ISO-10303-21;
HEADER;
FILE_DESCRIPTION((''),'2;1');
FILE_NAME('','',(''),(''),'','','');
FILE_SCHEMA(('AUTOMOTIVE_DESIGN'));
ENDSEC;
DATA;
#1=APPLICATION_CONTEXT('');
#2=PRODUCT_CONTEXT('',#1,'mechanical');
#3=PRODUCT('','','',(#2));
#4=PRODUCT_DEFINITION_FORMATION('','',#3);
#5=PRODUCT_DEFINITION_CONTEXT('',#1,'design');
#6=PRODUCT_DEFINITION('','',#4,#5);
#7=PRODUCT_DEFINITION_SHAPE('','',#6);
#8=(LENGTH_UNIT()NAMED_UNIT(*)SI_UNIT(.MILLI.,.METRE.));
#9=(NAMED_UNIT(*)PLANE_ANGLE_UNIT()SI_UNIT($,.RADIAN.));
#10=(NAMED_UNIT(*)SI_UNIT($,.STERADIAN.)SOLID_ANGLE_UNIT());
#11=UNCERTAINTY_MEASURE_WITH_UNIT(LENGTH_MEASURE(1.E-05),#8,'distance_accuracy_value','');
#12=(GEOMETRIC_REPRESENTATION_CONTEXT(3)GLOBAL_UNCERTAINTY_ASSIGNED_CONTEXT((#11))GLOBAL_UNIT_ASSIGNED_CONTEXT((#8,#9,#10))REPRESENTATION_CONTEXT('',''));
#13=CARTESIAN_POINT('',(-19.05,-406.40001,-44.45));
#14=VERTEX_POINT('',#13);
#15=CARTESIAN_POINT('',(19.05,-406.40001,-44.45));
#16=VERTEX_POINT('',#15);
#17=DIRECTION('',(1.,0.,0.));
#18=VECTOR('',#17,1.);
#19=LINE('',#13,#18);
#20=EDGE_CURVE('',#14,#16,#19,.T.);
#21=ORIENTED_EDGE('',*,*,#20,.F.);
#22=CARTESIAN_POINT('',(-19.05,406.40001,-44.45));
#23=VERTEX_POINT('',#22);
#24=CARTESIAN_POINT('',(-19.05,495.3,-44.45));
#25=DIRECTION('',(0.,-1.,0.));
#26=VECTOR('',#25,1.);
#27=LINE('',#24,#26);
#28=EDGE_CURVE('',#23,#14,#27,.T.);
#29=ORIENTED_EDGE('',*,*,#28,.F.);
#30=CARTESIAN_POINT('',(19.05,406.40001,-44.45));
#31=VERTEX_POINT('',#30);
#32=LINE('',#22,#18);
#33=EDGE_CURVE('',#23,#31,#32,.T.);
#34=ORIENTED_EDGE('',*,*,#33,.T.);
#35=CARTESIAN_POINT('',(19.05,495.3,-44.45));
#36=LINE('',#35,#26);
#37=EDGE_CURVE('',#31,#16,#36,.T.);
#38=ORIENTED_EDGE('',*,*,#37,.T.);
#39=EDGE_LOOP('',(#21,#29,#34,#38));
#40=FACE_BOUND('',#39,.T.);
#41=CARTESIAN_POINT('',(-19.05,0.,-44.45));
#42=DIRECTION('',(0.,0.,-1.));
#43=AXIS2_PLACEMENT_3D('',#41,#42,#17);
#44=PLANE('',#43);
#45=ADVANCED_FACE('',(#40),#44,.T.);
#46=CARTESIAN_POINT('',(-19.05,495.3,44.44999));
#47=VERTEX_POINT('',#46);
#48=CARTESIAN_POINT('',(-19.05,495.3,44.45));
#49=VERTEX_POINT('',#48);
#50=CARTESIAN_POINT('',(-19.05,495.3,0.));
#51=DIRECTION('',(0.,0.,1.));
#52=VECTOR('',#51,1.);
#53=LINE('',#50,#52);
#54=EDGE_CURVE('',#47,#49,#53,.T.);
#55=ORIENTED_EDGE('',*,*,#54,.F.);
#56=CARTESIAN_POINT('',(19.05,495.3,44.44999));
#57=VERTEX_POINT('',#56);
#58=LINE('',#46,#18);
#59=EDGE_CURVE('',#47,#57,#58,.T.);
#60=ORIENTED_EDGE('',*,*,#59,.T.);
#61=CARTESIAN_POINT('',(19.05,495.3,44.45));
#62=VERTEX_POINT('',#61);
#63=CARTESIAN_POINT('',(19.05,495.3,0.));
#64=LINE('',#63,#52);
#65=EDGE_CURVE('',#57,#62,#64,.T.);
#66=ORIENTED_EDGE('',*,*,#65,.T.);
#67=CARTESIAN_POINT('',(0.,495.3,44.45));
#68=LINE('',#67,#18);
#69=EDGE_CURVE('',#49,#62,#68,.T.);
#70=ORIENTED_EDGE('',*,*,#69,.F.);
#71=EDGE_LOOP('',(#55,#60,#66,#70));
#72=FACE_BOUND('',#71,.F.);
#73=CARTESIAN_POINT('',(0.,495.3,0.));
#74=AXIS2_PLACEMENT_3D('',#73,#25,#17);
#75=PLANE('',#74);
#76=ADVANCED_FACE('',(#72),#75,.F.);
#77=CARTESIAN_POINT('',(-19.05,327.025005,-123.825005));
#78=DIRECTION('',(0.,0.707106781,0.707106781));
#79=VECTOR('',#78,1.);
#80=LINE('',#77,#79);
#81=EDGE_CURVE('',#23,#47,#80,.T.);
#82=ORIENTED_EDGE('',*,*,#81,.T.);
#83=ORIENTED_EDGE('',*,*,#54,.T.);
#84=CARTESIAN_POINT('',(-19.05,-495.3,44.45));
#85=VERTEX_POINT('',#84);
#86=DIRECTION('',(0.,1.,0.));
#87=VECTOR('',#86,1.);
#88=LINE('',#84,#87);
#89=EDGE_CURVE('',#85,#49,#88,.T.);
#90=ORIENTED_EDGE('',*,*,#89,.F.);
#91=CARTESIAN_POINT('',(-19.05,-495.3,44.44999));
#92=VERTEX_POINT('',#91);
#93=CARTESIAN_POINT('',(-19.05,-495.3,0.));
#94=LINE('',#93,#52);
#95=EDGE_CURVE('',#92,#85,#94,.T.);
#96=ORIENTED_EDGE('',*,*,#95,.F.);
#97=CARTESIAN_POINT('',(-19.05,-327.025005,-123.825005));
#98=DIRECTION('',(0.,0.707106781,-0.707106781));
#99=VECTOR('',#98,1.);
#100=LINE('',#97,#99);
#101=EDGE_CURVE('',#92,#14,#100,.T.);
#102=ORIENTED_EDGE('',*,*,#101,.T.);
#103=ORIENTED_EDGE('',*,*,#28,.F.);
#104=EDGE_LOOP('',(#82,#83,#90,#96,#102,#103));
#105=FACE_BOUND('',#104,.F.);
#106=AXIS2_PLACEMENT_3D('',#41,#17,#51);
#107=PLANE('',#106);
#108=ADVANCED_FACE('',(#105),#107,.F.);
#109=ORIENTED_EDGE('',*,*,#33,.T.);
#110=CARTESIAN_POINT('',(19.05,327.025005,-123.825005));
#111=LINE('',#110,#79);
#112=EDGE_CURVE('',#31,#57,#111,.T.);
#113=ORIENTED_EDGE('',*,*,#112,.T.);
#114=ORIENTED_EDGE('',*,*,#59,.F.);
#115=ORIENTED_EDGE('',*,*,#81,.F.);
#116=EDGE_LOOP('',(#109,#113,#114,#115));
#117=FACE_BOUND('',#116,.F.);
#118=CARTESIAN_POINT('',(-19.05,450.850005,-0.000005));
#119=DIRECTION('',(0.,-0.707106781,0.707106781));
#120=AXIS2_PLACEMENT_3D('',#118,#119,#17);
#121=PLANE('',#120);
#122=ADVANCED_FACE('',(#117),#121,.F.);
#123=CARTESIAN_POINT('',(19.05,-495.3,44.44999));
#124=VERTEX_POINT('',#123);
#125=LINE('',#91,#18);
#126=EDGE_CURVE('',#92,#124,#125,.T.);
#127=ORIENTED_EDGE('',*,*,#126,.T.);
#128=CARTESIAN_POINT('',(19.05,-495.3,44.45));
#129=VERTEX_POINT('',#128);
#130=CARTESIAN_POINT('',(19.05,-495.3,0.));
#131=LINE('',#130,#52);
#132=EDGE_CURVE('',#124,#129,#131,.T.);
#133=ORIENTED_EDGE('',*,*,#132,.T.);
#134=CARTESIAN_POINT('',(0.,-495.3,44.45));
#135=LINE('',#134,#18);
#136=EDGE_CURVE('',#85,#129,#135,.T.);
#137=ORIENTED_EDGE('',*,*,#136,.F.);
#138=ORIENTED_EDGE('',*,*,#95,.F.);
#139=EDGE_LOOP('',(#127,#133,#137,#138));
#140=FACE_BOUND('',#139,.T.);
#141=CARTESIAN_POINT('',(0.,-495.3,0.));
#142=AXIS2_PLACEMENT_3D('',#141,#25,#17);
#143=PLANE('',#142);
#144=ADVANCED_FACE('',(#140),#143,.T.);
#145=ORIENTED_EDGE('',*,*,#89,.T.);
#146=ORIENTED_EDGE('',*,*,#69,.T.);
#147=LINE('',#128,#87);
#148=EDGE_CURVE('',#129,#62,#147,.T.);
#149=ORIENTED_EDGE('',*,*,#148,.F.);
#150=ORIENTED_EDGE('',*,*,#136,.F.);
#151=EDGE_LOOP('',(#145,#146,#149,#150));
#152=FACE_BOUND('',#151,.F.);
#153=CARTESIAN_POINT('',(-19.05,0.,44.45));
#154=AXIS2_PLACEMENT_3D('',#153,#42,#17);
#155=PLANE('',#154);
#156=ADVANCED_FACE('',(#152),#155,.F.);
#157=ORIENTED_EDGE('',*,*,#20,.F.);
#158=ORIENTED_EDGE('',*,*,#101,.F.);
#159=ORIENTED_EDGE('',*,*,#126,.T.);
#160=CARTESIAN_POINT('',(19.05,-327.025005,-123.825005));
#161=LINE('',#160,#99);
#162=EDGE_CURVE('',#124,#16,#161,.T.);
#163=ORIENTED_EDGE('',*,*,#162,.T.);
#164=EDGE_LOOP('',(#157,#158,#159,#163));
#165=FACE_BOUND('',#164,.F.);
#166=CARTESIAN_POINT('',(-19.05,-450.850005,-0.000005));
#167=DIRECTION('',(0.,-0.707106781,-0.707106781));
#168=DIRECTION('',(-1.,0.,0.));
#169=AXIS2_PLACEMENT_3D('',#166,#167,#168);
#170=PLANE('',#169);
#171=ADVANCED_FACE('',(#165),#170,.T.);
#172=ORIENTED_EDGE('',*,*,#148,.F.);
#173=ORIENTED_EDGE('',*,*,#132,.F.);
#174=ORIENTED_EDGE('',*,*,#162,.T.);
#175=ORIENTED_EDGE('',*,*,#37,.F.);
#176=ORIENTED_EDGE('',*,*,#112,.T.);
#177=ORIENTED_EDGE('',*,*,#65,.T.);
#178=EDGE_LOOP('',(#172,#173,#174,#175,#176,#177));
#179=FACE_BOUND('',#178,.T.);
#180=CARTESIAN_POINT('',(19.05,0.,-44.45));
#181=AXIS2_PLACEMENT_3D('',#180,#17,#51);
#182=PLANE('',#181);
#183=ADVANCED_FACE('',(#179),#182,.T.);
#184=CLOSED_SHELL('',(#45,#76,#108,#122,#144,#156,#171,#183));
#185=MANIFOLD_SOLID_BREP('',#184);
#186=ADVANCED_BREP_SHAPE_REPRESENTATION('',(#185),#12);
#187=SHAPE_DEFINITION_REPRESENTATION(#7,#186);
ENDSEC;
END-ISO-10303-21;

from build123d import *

# Parameters (mm, degrees)
F0_W     = 38.1
F0_H     = 88.9
F1_DEPTH = 495.3
F2_SIZE2 = 88.89999
F2_SIZE  = 88.89999
F3_SIZE2 = 88.89999
F3_SIZE  = 88.89999


# Not quite as in the source:
# - a fillet or chamfer is up to 0.001 mm smaller than in the source, because OpenCascade refuses the exact size


with BuildPart() as f1:
    # F0 (on Front) → F1 (new body, symmetric)
    with BuildSketch(Plane.XZ):
        Rectangle(F0_W, F0_H)
    extrude(amount=F1_DEPTH, both=True)

    # F2 (size 88.9 and 88.9 in the source; OpenCascade refuses exactly that, so slightly less here)
    f2_edges = [f1.edges().sort_by_distance(p)[0] for p in [
        (0, -495.3, -44.45),
    ]]
    chamfer(f2_edges, length=F2_SIZE, length2=F2_SIZE2)

    # F3 (size 88.9 and 88.9 in the source; OpenCascade refuses exactly that, so slightly less here)
    f3_edges = [f1.edges().sort_by_distance(p)[0] for p in [
        (0, 495.3, -44.45),
    ]]
    chamfer(f3_edges, length=F3_SIZE, length2=F3_SIZE2)


solid = f1.part
